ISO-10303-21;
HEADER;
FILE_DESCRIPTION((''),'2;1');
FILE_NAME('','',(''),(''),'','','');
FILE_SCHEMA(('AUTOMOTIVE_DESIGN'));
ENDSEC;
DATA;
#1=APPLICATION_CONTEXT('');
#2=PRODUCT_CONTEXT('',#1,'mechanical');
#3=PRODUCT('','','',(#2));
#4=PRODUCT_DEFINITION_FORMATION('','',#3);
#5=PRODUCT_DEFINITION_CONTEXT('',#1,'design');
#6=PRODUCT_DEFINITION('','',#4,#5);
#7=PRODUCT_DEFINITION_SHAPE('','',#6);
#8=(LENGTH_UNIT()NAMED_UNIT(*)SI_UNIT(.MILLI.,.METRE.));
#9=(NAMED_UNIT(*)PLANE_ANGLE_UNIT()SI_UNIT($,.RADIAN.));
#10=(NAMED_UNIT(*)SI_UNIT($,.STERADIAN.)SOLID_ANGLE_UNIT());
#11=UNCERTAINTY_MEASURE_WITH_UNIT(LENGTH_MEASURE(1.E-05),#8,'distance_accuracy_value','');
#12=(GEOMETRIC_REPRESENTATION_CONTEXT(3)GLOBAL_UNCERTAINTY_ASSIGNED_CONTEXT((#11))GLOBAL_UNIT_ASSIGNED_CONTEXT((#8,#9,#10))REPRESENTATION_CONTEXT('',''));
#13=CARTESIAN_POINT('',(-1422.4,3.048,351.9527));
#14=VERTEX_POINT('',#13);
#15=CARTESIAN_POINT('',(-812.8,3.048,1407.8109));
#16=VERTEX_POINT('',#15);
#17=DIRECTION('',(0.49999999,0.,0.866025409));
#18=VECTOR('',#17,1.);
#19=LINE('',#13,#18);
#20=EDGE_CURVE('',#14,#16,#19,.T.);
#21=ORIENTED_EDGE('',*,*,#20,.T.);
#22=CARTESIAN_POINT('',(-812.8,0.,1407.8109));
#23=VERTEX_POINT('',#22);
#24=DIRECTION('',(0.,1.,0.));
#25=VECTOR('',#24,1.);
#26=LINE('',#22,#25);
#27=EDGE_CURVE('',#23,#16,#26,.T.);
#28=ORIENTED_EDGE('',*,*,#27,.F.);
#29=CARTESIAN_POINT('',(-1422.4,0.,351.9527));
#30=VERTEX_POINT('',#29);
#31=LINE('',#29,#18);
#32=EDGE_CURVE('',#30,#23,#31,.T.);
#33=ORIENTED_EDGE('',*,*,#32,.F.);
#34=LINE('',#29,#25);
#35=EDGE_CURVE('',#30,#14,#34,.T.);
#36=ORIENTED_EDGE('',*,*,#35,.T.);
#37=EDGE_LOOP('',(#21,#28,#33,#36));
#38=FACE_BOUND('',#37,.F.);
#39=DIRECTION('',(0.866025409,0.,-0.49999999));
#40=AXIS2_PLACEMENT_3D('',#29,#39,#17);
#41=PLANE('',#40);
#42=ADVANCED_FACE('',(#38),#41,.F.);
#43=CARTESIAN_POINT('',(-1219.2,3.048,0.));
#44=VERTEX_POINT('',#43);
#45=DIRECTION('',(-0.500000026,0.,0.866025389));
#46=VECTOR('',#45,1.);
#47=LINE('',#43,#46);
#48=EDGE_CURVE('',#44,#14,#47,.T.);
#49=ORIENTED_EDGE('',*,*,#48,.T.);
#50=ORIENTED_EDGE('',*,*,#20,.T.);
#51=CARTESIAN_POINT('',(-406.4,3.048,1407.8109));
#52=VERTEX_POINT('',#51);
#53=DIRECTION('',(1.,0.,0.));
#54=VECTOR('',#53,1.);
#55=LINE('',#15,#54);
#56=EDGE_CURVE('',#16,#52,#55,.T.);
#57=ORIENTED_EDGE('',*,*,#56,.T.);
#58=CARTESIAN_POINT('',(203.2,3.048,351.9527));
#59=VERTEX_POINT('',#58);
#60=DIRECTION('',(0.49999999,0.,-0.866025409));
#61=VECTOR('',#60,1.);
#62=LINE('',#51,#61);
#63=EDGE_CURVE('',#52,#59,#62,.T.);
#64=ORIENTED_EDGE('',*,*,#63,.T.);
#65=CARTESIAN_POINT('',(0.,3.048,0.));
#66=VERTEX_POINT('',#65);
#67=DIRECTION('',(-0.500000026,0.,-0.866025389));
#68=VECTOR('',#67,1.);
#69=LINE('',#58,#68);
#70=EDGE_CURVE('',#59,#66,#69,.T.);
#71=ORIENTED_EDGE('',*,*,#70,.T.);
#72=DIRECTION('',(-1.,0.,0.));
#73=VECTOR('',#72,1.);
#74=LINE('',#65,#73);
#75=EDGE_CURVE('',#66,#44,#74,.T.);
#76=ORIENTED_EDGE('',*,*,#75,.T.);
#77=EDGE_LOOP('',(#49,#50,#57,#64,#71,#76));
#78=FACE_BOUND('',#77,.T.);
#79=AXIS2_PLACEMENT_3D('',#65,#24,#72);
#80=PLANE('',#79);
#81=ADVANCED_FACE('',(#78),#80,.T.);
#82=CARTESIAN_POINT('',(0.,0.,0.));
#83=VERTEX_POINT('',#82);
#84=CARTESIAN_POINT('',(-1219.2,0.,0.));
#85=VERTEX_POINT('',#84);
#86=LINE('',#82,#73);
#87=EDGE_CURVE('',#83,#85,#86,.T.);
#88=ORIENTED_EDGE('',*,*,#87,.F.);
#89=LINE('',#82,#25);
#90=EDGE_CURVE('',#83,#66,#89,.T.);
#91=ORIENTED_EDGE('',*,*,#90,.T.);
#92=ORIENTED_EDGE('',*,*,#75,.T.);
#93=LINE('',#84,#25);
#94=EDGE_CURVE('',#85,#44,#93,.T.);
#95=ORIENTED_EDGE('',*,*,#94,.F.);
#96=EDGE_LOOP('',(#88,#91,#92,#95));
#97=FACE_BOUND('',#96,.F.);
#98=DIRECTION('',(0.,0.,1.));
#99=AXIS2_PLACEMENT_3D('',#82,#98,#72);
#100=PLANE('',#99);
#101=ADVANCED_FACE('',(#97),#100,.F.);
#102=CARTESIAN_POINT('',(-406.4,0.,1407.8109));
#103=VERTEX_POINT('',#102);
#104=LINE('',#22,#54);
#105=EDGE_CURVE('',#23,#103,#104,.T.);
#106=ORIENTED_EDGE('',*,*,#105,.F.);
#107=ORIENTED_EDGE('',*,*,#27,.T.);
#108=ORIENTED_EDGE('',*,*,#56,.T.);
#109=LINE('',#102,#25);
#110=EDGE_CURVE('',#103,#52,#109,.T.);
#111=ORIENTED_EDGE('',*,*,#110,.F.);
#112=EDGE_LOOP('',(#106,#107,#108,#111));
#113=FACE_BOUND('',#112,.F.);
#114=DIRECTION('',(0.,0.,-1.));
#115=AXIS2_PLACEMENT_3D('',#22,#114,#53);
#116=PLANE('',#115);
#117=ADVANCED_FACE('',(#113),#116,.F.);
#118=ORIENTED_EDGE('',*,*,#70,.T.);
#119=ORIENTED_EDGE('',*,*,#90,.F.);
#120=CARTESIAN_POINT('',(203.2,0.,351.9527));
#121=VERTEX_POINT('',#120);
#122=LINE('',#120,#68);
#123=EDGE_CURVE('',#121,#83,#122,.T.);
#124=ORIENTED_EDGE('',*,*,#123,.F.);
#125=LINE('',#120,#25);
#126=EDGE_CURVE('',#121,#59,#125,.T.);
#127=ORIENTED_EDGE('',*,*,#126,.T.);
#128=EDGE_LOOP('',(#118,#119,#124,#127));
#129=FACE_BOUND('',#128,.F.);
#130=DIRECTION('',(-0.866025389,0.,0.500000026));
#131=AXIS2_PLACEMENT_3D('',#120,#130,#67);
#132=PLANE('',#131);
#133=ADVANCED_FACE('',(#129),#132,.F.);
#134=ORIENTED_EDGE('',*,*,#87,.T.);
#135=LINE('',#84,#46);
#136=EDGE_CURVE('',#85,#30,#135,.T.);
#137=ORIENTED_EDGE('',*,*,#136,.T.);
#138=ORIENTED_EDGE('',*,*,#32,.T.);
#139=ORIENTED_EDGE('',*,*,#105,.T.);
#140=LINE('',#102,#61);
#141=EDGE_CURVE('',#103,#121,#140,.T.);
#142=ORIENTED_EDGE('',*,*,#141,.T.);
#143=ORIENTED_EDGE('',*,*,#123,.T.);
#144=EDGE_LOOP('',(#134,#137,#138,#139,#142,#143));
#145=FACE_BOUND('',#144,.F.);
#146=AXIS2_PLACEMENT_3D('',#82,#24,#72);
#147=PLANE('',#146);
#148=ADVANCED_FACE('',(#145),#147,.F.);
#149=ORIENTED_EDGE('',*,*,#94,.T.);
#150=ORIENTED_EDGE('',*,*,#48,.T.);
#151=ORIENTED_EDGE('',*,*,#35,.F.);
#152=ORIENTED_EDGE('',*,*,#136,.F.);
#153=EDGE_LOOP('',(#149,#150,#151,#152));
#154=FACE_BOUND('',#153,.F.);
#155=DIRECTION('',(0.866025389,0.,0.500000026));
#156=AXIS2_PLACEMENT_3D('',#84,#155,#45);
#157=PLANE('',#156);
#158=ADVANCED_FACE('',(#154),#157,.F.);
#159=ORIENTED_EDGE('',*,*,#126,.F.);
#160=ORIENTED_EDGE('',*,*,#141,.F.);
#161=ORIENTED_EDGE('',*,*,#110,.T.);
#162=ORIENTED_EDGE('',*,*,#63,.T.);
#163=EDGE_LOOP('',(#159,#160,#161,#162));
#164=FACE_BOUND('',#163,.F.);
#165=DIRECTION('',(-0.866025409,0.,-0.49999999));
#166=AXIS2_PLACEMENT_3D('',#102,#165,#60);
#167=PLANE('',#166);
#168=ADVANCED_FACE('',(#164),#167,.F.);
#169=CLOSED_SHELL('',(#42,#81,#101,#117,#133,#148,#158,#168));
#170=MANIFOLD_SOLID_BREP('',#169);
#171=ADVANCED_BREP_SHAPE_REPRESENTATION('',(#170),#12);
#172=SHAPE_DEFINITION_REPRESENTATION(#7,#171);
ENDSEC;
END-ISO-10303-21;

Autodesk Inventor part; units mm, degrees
ref_plane "YZ Plane" through (0, 0, 0) normal (1, 0, 0) x (0, 1, 0)
ref_plane "XZ Plane" through (0, 0, 0) normal (0, 1, 0) x (-1, 0, 0)
ref_plane "XY Plane" through (0, 0, 0) normal (0, 0, 1) x (1, 0, 0)
sketch "Sketch1" plane through (0, 0, 0) normal (0, 1, 0) x (-1, 0, 0)
  line L0 (0, 0) -> (1219.2, 0)
  line L1 (1219.2, 0) -> (1422.4, 351.9527)
  line L2 (1422.4, 351.9527) -> (812.8, 1407.8109)
  line L3 (812.8, 1407.8109) -> (406.4, 1407.8109)
  line L4 (406.4, 1407.8109) -> (-203.2, 351.9527)
  line L5 (-203.2, 351.9527) -> (0, 0)
  dimension "d7" = 1219.2
  dimension "d8" = 406.4
  dimension "d9" = 120
  dimension "d10" = 1219.2
  dimension "d11" = 120
  dimension "d12" = 406.4
  dimension "d13" = 1219.2
  dimension "d14" = 120
extrude "Plate1" add sketch "Sketch1" along normal blind 3.048
equation "\"BendRadius\" = Thickness"
equation "\"BendReliefWidth\" = Thickness"
equation "\"BendReliefDepth\" = 0.5 * Thickness"
equation "\"CornerReliefSize\" = 4 * Thickness"
equation "\"MinimumRemnant\" = 2 * Thickness"
equation "\"TransitionRadius\" = BendRadius"
equation "\"JacobiRadiusSize\" = BendRadius"
equation "\"GapSize\" = Thickness"
equation "\"d2\" = BendRadius"
equation "\"Thickness\" = 3.048"
properties part number "Ground" material "Carpet"
